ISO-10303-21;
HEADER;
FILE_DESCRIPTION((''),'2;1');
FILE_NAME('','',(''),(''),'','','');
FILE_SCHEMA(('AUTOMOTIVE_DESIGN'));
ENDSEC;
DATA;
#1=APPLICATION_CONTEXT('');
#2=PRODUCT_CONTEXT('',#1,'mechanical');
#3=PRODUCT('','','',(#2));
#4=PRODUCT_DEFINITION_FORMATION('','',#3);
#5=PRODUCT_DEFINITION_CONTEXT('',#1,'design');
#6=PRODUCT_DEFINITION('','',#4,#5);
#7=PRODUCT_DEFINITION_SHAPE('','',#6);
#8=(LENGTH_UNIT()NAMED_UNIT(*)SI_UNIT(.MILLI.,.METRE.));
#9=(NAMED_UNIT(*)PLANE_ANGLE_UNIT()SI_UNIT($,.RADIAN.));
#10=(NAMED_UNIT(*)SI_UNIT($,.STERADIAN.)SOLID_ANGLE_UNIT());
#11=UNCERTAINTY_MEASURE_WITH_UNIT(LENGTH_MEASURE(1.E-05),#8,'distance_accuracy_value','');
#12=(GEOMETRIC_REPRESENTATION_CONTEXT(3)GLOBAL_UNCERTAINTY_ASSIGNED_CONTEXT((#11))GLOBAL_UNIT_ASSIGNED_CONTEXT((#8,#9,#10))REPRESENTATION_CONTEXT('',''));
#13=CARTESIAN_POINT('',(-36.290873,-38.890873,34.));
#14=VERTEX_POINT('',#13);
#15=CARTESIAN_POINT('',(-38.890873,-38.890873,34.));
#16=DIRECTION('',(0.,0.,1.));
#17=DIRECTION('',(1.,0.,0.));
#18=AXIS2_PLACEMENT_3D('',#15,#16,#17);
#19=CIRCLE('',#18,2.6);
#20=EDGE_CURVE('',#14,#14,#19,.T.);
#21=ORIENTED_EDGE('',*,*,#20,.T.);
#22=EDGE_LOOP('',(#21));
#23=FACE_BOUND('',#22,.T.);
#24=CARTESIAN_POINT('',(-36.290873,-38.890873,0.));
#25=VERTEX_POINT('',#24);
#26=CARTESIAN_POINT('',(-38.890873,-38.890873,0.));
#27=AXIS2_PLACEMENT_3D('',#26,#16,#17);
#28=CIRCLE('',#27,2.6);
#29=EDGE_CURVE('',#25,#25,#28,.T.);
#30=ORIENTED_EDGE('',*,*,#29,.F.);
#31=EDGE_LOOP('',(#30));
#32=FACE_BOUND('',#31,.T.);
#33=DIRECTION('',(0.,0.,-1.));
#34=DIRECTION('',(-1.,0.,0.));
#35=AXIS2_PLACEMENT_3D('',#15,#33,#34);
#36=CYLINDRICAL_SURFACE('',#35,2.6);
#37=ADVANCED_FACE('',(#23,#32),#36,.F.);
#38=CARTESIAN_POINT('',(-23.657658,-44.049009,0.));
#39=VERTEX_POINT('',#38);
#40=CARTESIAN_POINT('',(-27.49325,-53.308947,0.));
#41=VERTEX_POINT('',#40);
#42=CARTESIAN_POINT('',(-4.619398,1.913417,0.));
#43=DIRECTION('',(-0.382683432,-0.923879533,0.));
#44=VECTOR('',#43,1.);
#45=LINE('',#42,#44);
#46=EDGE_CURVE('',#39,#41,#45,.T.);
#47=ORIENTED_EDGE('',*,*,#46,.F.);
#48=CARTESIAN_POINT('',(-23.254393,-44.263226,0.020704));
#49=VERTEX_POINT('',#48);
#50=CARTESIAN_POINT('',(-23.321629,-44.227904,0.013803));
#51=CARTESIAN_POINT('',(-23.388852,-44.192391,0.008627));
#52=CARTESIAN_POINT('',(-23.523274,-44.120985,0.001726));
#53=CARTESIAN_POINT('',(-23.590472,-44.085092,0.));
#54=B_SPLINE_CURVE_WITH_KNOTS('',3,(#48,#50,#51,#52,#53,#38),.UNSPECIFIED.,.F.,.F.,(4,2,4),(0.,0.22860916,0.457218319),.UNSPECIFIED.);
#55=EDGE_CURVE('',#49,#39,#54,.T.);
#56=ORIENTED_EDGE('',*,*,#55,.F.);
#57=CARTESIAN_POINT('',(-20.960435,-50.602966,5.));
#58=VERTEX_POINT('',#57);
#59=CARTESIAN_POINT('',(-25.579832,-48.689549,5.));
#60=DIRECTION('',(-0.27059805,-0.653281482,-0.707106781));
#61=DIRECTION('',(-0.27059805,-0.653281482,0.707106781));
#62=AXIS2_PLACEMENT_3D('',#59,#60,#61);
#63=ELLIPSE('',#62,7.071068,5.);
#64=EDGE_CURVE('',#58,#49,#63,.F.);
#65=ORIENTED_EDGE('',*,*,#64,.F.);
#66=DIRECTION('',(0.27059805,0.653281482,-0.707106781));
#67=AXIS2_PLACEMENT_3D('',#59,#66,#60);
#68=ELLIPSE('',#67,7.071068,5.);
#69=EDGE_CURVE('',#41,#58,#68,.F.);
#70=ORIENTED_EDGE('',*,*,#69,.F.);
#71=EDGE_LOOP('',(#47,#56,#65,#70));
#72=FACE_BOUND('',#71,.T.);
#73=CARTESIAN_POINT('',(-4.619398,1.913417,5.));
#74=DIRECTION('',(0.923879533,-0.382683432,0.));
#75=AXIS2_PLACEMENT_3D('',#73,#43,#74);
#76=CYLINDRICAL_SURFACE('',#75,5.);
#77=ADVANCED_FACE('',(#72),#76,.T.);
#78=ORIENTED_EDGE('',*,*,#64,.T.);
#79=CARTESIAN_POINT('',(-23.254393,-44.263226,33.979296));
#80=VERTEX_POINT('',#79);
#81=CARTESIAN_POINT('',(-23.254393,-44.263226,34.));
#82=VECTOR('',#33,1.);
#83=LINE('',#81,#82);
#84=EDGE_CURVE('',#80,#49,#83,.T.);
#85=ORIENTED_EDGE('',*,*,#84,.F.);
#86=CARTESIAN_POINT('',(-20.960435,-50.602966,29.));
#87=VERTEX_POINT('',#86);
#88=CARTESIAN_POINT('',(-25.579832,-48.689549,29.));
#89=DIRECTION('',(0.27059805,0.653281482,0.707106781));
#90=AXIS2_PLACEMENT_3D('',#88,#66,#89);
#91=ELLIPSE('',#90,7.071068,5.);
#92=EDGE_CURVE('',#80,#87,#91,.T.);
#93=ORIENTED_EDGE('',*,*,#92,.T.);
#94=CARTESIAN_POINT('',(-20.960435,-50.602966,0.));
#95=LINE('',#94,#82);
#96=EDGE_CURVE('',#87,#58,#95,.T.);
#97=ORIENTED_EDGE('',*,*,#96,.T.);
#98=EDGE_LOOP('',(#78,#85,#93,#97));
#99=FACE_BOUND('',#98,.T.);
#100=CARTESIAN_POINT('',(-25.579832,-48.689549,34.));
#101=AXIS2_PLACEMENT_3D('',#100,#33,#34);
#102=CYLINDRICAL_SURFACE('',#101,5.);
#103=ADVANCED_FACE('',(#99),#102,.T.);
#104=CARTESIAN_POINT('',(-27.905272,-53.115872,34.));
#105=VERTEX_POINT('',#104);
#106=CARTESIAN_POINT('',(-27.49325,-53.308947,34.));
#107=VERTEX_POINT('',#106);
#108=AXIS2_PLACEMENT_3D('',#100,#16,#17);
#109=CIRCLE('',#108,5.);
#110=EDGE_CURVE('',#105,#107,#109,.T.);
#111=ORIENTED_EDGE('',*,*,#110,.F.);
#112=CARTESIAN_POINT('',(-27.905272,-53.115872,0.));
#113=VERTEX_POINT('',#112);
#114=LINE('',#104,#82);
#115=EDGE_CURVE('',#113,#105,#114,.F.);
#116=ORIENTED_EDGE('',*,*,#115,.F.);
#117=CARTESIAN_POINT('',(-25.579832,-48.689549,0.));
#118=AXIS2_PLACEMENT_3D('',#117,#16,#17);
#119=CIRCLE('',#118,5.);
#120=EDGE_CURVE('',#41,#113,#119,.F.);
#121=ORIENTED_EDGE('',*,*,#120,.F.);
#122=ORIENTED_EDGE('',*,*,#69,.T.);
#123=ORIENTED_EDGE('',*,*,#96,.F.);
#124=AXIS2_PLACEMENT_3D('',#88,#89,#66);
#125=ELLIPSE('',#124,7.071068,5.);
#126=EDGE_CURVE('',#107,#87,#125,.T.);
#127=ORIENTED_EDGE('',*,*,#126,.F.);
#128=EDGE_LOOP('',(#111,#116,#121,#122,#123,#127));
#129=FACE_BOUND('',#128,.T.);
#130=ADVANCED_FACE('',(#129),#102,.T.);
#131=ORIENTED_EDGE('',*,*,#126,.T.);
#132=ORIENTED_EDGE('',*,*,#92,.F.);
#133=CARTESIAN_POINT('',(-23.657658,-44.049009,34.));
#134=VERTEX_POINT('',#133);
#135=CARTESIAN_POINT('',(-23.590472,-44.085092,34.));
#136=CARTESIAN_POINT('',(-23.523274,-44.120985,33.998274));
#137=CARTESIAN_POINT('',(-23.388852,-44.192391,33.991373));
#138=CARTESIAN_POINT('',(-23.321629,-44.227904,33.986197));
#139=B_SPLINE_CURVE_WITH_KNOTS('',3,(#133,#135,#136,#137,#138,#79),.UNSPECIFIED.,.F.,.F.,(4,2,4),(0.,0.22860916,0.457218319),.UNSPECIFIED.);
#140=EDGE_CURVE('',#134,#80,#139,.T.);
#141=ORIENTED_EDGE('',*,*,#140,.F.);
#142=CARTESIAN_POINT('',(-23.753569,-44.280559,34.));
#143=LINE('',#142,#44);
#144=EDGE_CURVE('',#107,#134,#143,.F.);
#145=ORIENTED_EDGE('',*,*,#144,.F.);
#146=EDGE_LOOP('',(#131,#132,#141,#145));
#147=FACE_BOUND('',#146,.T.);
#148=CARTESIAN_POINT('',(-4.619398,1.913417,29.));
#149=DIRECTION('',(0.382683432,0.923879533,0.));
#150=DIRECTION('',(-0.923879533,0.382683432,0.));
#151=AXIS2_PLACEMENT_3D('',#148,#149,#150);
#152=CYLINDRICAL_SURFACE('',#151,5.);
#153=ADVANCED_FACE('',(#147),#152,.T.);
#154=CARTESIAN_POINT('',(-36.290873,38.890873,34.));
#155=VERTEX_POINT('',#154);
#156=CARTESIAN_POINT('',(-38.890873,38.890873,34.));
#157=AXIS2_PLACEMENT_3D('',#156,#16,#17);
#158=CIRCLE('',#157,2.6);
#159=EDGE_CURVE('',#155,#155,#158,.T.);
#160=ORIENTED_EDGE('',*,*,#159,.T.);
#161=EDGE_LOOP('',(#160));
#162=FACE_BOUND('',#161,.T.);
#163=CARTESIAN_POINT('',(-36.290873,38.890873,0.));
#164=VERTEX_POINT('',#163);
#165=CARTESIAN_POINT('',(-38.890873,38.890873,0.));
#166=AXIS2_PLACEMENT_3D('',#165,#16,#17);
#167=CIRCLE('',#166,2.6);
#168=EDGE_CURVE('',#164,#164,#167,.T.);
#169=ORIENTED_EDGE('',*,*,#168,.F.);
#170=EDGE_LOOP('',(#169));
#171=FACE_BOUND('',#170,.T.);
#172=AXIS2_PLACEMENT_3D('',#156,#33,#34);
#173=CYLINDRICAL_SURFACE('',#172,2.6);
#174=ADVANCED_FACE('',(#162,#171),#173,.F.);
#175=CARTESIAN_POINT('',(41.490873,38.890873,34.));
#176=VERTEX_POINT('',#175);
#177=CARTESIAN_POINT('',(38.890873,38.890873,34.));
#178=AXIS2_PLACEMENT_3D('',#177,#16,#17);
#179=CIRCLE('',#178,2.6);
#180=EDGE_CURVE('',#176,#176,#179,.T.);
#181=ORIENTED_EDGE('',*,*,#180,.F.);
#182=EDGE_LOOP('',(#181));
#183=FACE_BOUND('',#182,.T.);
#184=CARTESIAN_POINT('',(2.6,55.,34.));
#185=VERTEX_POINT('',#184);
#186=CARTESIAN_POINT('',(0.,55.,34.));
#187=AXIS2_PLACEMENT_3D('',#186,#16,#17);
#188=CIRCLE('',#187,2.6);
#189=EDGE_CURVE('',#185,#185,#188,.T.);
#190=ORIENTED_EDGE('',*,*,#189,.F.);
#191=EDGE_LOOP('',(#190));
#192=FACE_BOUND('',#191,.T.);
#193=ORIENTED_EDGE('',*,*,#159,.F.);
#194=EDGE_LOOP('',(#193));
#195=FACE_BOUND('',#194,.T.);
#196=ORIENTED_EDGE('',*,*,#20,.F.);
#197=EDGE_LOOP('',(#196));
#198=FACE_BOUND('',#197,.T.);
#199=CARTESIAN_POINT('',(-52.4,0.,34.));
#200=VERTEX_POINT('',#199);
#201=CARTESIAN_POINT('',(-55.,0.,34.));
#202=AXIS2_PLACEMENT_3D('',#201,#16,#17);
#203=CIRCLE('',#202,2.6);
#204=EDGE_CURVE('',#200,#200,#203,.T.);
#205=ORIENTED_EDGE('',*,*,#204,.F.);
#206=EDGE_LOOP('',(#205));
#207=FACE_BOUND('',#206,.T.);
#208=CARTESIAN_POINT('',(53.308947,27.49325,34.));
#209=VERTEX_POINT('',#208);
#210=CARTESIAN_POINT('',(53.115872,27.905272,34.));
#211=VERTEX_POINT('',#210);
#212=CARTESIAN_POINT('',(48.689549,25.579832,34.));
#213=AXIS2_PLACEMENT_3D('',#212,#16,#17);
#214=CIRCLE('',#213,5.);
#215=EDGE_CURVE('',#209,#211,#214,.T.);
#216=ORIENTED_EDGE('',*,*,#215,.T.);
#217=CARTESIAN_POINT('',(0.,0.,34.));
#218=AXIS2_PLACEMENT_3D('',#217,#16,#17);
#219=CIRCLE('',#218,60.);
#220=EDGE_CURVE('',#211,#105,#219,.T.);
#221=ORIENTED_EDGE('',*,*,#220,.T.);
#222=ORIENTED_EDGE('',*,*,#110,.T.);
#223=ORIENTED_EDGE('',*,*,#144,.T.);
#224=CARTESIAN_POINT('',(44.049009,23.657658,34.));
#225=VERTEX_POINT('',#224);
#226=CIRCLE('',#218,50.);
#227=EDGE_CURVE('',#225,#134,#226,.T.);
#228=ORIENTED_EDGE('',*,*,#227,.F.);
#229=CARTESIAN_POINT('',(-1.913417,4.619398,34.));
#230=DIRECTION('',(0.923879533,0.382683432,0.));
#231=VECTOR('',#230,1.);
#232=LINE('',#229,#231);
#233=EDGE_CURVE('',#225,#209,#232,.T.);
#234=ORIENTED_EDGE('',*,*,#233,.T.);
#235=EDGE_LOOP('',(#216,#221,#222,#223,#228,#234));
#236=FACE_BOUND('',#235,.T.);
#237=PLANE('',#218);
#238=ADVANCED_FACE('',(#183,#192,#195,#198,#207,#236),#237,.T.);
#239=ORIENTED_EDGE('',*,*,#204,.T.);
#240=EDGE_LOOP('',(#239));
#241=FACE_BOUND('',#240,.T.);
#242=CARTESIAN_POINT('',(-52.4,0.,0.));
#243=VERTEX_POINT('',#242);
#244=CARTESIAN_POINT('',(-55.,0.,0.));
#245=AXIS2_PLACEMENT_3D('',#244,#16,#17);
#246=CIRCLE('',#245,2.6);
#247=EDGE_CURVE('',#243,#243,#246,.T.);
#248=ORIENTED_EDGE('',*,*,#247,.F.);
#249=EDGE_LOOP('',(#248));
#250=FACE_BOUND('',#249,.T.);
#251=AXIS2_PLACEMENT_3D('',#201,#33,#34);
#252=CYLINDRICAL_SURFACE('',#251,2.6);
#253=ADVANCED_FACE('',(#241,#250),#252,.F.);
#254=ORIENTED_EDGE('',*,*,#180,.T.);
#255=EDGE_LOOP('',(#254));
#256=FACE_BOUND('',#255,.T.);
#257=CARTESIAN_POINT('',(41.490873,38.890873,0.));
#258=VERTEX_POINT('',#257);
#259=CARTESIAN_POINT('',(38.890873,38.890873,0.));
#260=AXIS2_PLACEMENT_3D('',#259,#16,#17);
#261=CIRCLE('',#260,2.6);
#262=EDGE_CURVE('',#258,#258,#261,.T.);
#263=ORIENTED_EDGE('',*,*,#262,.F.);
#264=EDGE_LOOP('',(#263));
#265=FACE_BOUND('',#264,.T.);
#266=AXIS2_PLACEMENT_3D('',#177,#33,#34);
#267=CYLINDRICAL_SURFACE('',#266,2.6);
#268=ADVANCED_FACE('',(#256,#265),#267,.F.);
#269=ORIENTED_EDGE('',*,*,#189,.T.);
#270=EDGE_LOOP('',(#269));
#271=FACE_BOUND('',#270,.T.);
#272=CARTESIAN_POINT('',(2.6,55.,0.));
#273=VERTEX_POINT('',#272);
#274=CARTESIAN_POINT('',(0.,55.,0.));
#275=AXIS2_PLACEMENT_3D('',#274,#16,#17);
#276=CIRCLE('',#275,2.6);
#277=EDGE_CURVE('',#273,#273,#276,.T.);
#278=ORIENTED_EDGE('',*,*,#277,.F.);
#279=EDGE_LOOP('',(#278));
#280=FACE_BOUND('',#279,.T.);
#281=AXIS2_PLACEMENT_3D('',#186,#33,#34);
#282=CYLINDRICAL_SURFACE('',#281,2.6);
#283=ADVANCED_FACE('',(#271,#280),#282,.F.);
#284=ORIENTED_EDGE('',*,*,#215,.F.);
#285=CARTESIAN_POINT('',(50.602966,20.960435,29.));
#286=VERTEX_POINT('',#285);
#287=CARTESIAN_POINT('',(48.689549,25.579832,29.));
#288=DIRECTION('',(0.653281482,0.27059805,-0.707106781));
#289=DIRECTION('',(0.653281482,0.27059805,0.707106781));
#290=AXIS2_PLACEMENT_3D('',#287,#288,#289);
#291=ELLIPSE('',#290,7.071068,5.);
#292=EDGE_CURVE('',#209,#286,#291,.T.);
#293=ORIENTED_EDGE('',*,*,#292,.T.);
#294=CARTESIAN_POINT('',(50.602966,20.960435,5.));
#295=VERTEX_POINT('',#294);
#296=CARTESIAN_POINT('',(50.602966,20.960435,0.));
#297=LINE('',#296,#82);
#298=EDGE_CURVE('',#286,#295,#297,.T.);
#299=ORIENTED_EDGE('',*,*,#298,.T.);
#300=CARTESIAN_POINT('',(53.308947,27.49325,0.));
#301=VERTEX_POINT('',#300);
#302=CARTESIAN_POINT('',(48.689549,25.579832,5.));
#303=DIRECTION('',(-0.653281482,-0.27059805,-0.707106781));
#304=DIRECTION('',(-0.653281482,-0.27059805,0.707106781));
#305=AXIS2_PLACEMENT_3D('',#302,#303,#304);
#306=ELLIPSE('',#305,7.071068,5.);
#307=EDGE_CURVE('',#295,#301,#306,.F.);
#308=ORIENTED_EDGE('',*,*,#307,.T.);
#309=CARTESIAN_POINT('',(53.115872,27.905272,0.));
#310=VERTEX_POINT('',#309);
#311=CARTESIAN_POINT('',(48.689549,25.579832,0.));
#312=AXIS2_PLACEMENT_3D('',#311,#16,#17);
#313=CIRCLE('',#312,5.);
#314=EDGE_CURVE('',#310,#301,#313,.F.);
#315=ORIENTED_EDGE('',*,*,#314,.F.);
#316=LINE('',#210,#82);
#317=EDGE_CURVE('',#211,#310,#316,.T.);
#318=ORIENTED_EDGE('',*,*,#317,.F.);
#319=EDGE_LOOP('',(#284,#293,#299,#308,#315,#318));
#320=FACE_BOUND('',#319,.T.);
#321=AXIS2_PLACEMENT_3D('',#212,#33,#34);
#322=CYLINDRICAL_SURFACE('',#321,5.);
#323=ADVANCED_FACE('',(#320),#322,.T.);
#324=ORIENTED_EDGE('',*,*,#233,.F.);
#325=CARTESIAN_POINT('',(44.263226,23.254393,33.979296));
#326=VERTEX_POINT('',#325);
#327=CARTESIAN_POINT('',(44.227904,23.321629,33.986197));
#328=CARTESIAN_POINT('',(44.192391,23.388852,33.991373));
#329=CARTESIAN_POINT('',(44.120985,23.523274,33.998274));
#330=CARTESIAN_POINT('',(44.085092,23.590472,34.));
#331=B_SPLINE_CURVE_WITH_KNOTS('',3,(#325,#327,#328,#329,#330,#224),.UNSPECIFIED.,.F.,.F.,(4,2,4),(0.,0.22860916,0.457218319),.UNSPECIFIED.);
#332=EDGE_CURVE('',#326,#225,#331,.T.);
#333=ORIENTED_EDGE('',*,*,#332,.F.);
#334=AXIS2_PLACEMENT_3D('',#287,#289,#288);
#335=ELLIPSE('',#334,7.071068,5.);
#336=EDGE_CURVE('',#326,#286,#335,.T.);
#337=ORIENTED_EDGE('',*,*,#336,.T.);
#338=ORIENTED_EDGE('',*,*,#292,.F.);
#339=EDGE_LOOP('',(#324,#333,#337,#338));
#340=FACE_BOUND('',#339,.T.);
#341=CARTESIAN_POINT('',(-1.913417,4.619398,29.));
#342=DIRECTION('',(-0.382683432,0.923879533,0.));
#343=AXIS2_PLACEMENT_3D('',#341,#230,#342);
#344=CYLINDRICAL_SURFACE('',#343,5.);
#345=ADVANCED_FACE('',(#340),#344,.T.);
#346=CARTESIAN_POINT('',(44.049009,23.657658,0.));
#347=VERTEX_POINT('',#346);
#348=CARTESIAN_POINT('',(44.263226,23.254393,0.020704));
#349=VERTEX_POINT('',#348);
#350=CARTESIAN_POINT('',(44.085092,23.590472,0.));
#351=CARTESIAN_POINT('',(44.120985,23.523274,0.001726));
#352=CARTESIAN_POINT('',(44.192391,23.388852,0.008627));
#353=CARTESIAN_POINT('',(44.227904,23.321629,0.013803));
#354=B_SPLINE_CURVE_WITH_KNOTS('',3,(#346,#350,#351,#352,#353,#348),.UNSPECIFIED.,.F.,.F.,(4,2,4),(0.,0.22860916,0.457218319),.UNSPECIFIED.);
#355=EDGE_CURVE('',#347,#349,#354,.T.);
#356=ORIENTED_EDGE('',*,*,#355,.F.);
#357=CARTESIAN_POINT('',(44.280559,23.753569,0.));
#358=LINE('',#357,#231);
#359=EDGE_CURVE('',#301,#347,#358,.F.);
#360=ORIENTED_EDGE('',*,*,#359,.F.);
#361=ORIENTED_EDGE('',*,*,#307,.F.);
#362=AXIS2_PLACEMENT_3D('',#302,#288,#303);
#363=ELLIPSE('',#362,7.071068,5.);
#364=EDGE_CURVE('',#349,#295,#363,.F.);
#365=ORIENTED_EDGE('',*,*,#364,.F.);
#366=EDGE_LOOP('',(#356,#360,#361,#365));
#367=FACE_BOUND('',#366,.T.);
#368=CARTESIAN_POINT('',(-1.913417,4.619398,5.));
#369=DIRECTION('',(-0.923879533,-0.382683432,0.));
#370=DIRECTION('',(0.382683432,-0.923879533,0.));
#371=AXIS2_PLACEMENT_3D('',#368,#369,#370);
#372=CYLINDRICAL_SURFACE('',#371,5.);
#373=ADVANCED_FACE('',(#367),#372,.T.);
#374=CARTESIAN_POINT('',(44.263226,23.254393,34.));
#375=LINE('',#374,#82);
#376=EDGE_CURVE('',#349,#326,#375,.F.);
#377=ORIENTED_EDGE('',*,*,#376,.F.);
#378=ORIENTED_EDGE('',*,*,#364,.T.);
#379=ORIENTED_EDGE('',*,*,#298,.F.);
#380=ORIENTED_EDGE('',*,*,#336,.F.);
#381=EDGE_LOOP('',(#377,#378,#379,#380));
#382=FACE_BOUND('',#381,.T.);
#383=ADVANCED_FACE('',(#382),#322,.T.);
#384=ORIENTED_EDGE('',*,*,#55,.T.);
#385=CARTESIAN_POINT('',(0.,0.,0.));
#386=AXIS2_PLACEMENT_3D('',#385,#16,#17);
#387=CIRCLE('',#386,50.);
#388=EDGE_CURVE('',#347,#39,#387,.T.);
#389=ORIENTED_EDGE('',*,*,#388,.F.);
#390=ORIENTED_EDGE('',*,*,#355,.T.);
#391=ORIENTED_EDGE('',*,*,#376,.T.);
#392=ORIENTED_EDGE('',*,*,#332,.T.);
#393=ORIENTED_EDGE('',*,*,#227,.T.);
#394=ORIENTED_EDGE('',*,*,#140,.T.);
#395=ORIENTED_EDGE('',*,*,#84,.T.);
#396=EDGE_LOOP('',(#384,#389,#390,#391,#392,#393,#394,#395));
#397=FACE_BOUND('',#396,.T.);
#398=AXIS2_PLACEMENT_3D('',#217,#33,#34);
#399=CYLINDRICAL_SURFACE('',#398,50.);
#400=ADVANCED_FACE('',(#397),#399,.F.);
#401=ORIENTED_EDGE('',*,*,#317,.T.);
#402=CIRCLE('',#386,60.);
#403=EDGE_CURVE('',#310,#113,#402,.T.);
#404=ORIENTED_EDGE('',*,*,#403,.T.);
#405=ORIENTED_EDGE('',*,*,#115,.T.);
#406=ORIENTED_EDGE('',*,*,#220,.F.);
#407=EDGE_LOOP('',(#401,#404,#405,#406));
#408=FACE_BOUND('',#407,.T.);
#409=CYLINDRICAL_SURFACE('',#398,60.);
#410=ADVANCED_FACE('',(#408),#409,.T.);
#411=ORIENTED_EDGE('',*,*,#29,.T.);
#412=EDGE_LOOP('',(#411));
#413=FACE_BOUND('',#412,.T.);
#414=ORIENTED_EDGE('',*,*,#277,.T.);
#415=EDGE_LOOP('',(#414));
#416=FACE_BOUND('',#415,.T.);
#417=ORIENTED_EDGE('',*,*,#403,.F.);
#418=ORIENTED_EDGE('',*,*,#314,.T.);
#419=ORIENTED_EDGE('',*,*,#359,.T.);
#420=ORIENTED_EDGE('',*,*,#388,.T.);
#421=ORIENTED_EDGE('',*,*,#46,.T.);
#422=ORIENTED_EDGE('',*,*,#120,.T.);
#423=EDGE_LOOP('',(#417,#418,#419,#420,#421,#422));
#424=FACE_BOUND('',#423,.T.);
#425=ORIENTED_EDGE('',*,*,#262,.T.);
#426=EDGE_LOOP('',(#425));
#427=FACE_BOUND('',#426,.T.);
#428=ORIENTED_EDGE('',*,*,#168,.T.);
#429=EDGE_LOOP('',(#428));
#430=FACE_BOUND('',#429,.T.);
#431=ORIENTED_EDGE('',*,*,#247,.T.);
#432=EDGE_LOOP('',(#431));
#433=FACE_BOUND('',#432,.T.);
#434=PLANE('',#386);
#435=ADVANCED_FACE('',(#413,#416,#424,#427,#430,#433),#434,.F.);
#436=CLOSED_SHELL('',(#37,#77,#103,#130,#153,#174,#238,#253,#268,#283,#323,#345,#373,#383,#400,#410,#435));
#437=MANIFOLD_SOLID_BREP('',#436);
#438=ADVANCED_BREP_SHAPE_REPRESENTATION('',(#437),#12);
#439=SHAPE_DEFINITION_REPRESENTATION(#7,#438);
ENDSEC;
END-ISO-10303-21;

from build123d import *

# Parameters (mm, degrees)
SKETCH_2_R          = 60
SKETCH_2_R_2        = 2.6
SKETCH_2_R_3        = 50
EXTRUDE_1_DEPTH     = 34
CUT_EXTRUDE_START   = -34
SKETCH_3_R          = 2.6
CUT_EXTRUDE_1_DEPTH = 34
FILLET_1_R          = 5


with BuildPart() as part:
    # 草图2 → 凸台-拉伸1 (new body)
    with BuildSketch(Plane.XY):
        Circle(SKETCH_2_R)
        with Locations((0, 55)):
            Circle(SKETCH_2_R_2, mode=Mode.SUBTRACT)
        with Locations((38.890872965, 38.890872965)):
            Circle(SKETCH_2_R_2, mode=Mode.SUBTRACT)
        with Locations((55, 0)):
            Circle(SKETCH_2_R_2, mode=Mode.SUBTRACT)
        with Locations((38.890872965, -38.890872965)):
            Circle(SKETCH_2_R_2, mode=Mode.SUBTRACT)
        with Locations((0, -55)):
            Circle(SKETCH_2_R_2, mode=Mode.SUBTRACT)
        with Locations((-38.890872965, -38.890872965)):
            Circle(SKETCH_2_R_2, mode=Mode.SUBTRACT)
        with Locations((-55, 0)):
            Circle(SKETCH_2_R_2, mode=Mode.SUBTRACT)
        with Locations((-38.890872965, 38.890872965)):
            Circle(SKETCH_2_R_2, mode=Mode.SUBTRACT)
        Circle(SKETCH_2_R_3, mode=Mode.SUBTRACT)
    extrude(amount=EXTRUDE_1_DEPTH)

    # 草图3 → 切除-拉伸1 (cut)
    with BuildSketch(Plane.XY.offset(34).offset(CUT_EXTRUDE_START)):
        with BuildLine():
            Line((55.432771951, 22.961005942), (46.193976626, 19.134171618))
            ThreePointArc((46.193976626, 19.134171618), (49.03926402, 9.754516101), (50, 0))
            ThreePointArc((50, 0), (27.778511651, -41.573480615), (-19.134171618, -46.193976626))
            Line((-19.134171618, -46.193976626), (-22.961005942, -55.432771951))
            ThreePointArc((-22.961005942, -55.432771951), (33.334213981, -49.888176738), (60, 0))
            ThreePointArc((60, 0), (58.847116824, 11.705419321), (55.432771951, 22.961005942))
        make_face()
        with Locations((0, -55)):
            Circle(SKETCH_3_R, mode=Mode.SUBTRACT)
        with Locations((38.890872965, -38.890872965)):
            Circle(SKETCH_3_R, mode=Mode.SUBTRACT)
        with Locations((55, 0)):
            Circle(SKETCH_3_R, mode=Mode.SUBTRACT)
    extrude(amount=CUT_EXTRUDE_1_DEPTH, mode=Mode.SUBTRACT)

    # 圆角1
    fillet_1_edges = [part.edges().sort_by_distance(p)[0] for p in [
        (-19.134171618, -46.193976626, 17),
        (50.813374288, 21.04758878, 34),
        (46.193976626, 19.134171618, 17),
        (55.432771951, 22.961005942, 17),
        (-21.04758878, -50.813374288, 0),
        (-22.961005942, -55.432771951, 17),
        (50.813374288, 21.04758878, 0),
        (-21.04758878, -50.813374288, 34),
    ]]
    fillet(fillet_1_edges, radius=FILLET_1_R - 0.0001)  # a hair under: the kernel refuses the full size


solid = part.part
